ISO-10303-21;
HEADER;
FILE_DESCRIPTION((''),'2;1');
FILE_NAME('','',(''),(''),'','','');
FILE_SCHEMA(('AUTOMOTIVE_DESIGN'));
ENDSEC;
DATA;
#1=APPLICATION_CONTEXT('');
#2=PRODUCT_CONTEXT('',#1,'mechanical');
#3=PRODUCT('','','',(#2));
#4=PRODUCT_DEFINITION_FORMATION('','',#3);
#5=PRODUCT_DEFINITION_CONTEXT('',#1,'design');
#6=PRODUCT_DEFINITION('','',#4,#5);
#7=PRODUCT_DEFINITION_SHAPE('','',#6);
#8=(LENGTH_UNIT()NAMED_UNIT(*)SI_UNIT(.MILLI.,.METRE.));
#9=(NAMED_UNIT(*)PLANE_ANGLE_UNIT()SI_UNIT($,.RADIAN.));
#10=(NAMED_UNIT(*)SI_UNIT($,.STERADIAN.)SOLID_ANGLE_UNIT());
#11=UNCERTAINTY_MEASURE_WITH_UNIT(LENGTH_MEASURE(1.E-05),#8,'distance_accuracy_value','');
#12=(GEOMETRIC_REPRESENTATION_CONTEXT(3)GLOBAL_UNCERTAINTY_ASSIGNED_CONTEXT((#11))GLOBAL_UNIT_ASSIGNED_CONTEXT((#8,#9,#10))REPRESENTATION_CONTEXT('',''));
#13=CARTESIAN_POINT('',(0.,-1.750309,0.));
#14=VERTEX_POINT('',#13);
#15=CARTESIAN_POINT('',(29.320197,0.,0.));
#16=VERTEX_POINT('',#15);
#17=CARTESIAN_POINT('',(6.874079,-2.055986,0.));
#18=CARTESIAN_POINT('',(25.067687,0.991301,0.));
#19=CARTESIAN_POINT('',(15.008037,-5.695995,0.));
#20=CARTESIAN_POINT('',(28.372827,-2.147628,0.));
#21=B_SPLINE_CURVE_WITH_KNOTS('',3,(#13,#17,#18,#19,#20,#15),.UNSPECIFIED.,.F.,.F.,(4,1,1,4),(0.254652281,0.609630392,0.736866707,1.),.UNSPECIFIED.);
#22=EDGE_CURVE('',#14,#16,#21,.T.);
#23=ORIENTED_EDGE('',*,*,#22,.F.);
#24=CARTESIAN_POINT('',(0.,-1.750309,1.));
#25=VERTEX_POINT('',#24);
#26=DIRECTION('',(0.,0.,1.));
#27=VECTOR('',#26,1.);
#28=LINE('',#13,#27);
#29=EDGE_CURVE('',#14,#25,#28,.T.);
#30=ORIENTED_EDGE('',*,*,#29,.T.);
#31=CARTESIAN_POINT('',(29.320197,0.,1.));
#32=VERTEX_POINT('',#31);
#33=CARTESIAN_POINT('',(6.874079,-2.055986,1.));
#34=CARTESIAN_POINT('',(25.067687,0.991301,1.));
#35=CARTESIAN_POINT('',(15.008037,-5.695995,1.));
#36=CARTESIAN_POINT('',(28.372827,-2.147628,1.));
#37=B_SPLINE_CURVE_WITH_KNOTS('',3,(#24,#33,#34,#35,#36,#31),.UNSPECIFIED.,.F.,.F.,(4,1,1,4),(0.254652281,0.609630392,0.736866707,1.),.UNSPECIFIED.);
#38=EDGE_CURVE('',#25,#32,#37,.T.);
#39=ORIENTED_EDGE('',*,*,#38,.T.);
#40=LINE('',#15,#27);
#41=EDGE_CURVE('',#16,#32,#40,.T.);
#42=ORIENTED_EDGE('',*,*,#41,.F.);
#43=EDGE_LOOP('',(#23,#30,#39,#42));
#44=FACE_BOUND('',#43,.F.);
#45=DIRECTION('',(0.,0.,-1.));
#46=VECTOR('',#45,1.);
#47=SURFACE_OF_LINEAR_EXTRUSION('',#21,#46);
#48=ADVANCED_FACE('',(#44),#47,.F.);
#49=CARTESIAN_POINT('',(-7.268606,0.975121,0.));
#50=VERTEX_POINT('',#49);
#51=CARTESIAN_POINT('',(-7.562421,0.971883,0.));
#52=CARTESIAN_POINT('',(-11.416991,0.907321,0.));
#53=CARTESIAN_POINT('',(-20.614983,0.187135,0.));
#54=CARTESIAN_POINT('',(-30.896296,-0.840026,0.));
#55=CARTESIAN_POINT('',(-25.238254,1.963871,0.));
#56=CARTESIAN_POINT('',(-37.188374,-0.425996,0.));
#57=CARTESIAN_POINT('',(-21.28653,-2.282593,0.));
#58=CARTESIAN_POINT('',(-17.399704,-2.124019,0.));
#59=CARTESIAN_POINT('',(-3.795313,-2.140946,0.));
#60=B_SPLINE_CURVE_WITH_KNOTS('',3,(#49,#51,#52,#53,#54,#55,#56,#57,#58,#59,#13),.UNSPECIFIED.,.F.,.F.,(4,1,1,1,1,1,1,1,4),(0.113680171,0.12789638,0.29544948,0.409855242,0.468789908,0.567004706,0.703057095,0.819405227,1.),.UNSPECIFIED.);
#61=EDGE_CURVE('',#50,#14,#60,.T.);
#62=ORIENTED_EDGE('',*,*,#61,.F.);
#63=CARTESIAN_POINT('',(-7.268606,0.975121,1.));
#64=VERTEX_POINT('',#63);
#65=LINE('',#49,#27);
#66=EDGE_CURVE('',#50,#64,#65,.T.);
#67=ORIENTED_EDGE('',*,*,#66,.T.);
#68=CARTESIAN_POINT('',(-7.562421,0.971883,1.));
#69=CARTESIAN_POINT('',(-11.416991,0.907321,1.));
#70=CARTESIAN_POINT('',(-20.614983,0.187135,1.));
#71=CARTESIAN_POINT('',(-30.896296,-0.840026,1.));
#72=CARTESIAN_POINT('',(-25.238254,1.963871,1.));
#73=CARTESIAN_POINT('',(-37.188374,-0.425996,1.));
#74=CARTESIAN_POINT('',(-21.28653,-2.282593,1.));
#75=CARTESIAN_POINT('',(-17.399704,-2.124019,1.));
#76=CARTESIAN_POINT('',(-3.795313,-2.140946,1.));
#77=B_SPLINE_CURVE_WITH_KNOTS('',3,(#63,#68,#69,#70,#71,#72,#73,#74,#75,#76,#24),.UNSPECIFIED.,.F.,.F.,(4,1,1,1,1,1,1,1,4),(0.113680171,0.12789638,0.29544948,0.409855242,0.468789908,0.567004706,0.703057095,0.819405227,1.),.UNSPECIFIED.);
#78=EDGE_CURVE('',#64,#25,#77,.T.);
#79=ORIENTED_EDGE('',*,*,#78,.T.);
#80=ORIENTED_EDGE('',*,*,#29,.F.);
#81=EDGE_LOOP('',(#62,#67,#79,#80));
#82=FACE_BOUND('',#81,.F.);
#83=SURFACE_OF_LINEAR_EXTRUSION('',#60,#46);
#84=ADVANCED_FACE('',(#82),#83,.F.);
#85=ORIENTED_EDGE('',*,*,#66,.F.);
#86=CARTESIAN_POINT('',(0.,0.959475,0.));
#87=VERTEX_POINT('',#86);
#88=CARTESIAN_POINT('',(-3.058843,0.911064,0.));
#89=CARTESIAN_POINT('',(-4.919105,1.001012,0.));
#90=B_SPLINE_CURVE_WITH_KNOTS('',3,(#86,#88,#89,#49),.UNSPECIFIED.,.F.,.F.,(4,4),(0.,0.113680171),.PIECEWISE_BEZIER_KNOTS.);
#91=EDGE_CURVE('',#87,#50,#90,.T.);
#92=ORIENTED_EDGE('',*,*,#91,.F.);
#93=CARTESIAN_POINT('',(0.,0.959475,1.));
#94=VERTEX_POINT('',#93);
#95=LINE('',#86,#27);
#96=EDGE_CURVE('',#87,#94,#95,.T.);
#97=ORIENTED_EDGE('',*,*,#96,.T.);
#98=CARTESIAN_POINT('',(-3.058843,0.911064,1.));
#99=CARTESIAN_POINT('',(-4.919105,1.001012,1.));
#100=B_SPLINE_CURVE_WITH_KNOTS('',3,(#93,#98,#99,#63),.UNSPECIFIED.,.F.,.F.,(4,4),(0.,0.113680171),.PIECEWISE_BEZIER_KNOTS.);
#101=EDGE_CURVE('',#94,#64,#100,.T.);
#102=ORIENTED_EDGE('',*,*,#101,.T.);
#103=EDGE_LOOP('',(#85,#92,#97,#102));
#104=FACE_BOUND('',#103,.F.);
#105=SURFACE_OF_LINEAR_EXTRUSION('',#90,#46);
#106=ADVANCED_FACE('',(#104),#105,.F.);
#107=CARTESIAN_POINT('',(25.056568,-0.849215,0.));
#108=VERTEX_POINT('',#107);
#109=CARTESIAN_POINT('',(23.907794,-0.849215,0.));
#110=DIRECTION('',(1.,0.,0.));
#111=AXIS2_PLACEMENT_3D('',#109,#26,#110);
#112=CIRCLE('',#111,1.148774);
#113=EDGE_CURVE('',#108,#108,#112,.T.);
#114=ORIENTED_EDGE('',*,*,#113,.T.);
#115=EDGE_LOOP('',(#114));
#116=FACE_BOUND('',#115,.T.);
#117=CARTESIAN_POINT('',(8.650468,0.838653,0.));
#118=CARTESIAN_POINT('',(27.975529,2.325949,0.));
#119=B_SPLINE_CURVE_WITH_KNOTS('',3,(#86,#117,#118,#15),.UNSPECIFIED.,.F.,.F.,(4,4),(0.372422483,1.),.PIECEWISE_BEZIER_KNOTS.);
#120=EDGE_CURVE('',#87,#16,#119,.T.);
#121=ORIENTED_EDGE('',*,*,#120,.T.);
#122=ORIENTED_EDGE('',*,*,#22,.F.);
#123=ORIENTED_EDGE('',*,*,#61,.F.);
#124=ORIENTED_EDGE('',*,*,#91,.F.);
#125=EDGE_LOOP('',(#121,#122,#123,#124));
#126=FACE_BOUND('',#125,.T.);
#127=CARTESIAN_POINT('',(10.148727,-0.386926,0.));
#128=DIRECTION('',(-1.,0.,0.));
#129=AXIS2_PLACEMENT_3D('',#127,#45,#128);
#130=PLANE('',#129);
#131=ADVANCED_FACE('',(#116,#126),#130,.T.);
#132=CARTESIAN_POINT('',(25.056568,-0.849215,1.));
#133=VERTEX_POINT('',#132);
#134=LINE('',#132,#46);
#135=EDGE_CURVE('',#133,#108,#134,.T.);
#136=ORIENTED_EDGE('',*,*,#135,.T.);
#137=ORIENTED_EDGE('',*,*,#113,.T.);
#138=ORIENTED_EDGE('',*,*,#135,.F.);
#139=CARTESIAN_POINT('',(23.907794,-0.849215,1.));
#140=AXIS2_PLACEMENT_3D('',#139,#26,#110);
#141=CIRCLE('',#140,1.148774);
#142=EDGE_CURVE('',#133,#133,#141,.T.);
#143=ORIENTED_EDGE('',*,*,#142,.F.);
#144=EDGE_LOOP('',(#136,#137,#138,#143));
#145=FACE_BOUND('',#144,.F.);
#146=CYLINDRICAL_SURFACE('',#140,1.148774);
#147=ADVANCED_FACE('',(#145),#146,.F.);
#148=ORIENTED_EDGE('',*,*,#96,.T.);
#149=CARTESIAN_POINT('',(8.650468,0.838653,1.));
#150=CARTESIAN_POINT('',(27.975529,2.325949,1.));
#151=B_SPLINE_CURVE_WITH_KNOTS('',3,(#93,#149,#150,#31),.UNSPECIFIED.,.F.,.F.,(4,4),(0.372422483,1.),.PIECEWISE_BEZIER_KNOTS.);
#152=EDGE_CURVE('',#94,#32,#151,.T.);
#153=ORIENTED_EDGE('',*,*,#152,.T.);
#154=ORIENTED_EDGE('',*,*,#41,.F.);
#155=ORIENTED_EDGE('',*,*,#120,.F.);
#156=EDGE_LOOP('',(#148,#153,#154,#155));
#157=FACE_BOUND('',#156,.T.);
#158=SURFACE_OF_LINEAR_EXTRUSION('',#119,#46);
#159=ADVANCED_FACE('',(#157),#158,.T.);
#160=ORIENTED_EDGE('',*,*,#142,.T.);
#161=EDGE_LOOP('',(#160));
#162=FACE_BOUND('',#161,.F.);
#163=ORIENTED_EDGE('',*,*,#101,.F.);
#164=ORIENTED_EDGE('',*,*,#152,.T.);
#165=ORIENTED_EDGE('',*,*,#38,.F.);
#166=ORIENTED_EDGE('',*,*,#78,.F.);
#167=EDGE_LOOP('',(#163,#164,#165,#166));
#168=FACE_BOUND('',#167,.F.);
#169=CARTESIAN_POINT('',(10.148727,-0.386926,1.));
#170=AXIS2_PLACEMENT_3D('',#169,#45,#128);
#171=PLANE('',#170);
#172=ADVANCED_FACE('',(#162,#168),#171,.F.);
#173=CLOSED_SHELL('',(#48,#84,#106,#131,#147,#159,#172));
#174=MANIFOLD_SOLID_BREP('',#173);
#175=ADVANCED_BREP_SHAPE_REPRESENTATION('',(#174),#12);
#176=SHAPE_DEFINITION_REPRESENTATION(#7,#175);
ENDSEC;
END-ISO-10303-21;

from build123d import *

# Parameters (mm, degrees)
F1_DEPTH = 1
F2_R     = 1.1487741976
F3_DEPTH = 25


with BuildPart() as f1:
    # F0 (on Top) → F1 (new body)
    with BuildSketch(Plane.XY):
        with BuildLine():
            add(Edge.make_bspline(
                [(0, 0.9594753346), (8.6504682046, 0.8386531946), (27.9755286493, 2.3259491006), (29.3201971907, 0)],
                knots=[0.372422483, 0.372422483, 0.372422483, 0.372422483, 1, 1, 1, 1], degree=3))
            add(Edge.make_bspline(
                [(0, 0.9594753346), (-3.0588429709, 0.9110639463), (-4.9191047941, 1.0010118294), (-7.2686058101, 0.9751205946)],
                knots=[0, 0, 0, 0, 0.1136801708, 0.1136801708, 0.1136801708, 0.1136801708], degree=3))
            add(Edge.make_bspline(
                [(-10.2862044503, 0), (-9.109134082, 0.5199849001), (-8.1653764752, 0.8160683552), (-7.2686058101, 0.9751205946)],
                knots=[0, 0, 0, 0, 0.1160171443, 0.1160171443, 0.1160171443, 0.1160171443], degree=3))
            add(Edge.make_bspline(
                [(-10.2862044503, 0), (-6.5077329836, 0), (-4.9312894429, -1.5310231402), (0, -1.7503085824)],
                knots=[0, 0, 0, 0, 0.2546522806, 0.2546522806, 0.2546522806, 0.2546522806], degree=3))
            add(Edge.make_bspline(
                [(0, -1.7503085824), (6.8740786765, -2.0559863163), (25.0676874581, 0.9913012801), (15.008036825, -5.6959945314), (28.3728268523, -2.1476281598), (29.3201971907, 0)],
                knots=[0.2546522806, 0.2546522806, 0.2546522806, 0.2546522806, 0.6096303918, 0.7368667067, 1, 1, 1, 1], degree=3))
        make_face()
        with BuildLine():
            add(Edge.make_bspline(
                [(-10.2862044503, 0), (-9.109134082, 0.5199849001), (-8.1653764752, 0.8160683552), (-7.2686058101, 0.9751205946)],
                knots=[0, 0, 0, 0, 0.1160171443, 0.1160171443, 0.1160171443, 0.1160171443], degree=3))
            add(Edge.make_bspline(
                [(-7.2686058101, 0.9751205946), (-7.5624213285, 0.9718827809), (-11.4169906772, 0.9073211469), (-20.6149830719, 0.1871349563), (-30.8962958204, -0.8400259059), (-25.2382537195, 1.9638712633), (-37.1883742413, -0.4259963698), (-21.2865303674, -2.2825934057), (-17.3997042774, -2.1240190962), (-3.795313327, -2.1409456687), (0, -1.7503085824)],
                knots=[0.1136801708, 0.1136801708, 0.1136801708, 0.1136801708, 0.1278963801, 0.2954494802, 0.4098552425, 0.468789908, 0.5670047062, 0.7030570953, 0.8194052271, 1, 1, 1, 1], degree=3))
            add(Edge.make_bspline(
                [(-10.2862044503, 0), (-6.5077329836, 0), (-4.9312894429, -1.5310231402), (0, -1.7503085824)],
                knots=[0, 0, 0, 0, 0.2546522806, 0.2546522806, 0.2546522806, 0.2546522806], degree=3))
        make_face()
    extrude(amount=F1_DEPTH)

    # F2 (on face) → F3 (cut)
    with BuildSketch(Plane.XY.offset(1)):
        with Locations((23.9077936858, -0.8492149063)):
            Circle(F2_R)
    extrude(amount=-F3_DEPTH, mode=Mode.SUBTRACT)


solid = f1.part
